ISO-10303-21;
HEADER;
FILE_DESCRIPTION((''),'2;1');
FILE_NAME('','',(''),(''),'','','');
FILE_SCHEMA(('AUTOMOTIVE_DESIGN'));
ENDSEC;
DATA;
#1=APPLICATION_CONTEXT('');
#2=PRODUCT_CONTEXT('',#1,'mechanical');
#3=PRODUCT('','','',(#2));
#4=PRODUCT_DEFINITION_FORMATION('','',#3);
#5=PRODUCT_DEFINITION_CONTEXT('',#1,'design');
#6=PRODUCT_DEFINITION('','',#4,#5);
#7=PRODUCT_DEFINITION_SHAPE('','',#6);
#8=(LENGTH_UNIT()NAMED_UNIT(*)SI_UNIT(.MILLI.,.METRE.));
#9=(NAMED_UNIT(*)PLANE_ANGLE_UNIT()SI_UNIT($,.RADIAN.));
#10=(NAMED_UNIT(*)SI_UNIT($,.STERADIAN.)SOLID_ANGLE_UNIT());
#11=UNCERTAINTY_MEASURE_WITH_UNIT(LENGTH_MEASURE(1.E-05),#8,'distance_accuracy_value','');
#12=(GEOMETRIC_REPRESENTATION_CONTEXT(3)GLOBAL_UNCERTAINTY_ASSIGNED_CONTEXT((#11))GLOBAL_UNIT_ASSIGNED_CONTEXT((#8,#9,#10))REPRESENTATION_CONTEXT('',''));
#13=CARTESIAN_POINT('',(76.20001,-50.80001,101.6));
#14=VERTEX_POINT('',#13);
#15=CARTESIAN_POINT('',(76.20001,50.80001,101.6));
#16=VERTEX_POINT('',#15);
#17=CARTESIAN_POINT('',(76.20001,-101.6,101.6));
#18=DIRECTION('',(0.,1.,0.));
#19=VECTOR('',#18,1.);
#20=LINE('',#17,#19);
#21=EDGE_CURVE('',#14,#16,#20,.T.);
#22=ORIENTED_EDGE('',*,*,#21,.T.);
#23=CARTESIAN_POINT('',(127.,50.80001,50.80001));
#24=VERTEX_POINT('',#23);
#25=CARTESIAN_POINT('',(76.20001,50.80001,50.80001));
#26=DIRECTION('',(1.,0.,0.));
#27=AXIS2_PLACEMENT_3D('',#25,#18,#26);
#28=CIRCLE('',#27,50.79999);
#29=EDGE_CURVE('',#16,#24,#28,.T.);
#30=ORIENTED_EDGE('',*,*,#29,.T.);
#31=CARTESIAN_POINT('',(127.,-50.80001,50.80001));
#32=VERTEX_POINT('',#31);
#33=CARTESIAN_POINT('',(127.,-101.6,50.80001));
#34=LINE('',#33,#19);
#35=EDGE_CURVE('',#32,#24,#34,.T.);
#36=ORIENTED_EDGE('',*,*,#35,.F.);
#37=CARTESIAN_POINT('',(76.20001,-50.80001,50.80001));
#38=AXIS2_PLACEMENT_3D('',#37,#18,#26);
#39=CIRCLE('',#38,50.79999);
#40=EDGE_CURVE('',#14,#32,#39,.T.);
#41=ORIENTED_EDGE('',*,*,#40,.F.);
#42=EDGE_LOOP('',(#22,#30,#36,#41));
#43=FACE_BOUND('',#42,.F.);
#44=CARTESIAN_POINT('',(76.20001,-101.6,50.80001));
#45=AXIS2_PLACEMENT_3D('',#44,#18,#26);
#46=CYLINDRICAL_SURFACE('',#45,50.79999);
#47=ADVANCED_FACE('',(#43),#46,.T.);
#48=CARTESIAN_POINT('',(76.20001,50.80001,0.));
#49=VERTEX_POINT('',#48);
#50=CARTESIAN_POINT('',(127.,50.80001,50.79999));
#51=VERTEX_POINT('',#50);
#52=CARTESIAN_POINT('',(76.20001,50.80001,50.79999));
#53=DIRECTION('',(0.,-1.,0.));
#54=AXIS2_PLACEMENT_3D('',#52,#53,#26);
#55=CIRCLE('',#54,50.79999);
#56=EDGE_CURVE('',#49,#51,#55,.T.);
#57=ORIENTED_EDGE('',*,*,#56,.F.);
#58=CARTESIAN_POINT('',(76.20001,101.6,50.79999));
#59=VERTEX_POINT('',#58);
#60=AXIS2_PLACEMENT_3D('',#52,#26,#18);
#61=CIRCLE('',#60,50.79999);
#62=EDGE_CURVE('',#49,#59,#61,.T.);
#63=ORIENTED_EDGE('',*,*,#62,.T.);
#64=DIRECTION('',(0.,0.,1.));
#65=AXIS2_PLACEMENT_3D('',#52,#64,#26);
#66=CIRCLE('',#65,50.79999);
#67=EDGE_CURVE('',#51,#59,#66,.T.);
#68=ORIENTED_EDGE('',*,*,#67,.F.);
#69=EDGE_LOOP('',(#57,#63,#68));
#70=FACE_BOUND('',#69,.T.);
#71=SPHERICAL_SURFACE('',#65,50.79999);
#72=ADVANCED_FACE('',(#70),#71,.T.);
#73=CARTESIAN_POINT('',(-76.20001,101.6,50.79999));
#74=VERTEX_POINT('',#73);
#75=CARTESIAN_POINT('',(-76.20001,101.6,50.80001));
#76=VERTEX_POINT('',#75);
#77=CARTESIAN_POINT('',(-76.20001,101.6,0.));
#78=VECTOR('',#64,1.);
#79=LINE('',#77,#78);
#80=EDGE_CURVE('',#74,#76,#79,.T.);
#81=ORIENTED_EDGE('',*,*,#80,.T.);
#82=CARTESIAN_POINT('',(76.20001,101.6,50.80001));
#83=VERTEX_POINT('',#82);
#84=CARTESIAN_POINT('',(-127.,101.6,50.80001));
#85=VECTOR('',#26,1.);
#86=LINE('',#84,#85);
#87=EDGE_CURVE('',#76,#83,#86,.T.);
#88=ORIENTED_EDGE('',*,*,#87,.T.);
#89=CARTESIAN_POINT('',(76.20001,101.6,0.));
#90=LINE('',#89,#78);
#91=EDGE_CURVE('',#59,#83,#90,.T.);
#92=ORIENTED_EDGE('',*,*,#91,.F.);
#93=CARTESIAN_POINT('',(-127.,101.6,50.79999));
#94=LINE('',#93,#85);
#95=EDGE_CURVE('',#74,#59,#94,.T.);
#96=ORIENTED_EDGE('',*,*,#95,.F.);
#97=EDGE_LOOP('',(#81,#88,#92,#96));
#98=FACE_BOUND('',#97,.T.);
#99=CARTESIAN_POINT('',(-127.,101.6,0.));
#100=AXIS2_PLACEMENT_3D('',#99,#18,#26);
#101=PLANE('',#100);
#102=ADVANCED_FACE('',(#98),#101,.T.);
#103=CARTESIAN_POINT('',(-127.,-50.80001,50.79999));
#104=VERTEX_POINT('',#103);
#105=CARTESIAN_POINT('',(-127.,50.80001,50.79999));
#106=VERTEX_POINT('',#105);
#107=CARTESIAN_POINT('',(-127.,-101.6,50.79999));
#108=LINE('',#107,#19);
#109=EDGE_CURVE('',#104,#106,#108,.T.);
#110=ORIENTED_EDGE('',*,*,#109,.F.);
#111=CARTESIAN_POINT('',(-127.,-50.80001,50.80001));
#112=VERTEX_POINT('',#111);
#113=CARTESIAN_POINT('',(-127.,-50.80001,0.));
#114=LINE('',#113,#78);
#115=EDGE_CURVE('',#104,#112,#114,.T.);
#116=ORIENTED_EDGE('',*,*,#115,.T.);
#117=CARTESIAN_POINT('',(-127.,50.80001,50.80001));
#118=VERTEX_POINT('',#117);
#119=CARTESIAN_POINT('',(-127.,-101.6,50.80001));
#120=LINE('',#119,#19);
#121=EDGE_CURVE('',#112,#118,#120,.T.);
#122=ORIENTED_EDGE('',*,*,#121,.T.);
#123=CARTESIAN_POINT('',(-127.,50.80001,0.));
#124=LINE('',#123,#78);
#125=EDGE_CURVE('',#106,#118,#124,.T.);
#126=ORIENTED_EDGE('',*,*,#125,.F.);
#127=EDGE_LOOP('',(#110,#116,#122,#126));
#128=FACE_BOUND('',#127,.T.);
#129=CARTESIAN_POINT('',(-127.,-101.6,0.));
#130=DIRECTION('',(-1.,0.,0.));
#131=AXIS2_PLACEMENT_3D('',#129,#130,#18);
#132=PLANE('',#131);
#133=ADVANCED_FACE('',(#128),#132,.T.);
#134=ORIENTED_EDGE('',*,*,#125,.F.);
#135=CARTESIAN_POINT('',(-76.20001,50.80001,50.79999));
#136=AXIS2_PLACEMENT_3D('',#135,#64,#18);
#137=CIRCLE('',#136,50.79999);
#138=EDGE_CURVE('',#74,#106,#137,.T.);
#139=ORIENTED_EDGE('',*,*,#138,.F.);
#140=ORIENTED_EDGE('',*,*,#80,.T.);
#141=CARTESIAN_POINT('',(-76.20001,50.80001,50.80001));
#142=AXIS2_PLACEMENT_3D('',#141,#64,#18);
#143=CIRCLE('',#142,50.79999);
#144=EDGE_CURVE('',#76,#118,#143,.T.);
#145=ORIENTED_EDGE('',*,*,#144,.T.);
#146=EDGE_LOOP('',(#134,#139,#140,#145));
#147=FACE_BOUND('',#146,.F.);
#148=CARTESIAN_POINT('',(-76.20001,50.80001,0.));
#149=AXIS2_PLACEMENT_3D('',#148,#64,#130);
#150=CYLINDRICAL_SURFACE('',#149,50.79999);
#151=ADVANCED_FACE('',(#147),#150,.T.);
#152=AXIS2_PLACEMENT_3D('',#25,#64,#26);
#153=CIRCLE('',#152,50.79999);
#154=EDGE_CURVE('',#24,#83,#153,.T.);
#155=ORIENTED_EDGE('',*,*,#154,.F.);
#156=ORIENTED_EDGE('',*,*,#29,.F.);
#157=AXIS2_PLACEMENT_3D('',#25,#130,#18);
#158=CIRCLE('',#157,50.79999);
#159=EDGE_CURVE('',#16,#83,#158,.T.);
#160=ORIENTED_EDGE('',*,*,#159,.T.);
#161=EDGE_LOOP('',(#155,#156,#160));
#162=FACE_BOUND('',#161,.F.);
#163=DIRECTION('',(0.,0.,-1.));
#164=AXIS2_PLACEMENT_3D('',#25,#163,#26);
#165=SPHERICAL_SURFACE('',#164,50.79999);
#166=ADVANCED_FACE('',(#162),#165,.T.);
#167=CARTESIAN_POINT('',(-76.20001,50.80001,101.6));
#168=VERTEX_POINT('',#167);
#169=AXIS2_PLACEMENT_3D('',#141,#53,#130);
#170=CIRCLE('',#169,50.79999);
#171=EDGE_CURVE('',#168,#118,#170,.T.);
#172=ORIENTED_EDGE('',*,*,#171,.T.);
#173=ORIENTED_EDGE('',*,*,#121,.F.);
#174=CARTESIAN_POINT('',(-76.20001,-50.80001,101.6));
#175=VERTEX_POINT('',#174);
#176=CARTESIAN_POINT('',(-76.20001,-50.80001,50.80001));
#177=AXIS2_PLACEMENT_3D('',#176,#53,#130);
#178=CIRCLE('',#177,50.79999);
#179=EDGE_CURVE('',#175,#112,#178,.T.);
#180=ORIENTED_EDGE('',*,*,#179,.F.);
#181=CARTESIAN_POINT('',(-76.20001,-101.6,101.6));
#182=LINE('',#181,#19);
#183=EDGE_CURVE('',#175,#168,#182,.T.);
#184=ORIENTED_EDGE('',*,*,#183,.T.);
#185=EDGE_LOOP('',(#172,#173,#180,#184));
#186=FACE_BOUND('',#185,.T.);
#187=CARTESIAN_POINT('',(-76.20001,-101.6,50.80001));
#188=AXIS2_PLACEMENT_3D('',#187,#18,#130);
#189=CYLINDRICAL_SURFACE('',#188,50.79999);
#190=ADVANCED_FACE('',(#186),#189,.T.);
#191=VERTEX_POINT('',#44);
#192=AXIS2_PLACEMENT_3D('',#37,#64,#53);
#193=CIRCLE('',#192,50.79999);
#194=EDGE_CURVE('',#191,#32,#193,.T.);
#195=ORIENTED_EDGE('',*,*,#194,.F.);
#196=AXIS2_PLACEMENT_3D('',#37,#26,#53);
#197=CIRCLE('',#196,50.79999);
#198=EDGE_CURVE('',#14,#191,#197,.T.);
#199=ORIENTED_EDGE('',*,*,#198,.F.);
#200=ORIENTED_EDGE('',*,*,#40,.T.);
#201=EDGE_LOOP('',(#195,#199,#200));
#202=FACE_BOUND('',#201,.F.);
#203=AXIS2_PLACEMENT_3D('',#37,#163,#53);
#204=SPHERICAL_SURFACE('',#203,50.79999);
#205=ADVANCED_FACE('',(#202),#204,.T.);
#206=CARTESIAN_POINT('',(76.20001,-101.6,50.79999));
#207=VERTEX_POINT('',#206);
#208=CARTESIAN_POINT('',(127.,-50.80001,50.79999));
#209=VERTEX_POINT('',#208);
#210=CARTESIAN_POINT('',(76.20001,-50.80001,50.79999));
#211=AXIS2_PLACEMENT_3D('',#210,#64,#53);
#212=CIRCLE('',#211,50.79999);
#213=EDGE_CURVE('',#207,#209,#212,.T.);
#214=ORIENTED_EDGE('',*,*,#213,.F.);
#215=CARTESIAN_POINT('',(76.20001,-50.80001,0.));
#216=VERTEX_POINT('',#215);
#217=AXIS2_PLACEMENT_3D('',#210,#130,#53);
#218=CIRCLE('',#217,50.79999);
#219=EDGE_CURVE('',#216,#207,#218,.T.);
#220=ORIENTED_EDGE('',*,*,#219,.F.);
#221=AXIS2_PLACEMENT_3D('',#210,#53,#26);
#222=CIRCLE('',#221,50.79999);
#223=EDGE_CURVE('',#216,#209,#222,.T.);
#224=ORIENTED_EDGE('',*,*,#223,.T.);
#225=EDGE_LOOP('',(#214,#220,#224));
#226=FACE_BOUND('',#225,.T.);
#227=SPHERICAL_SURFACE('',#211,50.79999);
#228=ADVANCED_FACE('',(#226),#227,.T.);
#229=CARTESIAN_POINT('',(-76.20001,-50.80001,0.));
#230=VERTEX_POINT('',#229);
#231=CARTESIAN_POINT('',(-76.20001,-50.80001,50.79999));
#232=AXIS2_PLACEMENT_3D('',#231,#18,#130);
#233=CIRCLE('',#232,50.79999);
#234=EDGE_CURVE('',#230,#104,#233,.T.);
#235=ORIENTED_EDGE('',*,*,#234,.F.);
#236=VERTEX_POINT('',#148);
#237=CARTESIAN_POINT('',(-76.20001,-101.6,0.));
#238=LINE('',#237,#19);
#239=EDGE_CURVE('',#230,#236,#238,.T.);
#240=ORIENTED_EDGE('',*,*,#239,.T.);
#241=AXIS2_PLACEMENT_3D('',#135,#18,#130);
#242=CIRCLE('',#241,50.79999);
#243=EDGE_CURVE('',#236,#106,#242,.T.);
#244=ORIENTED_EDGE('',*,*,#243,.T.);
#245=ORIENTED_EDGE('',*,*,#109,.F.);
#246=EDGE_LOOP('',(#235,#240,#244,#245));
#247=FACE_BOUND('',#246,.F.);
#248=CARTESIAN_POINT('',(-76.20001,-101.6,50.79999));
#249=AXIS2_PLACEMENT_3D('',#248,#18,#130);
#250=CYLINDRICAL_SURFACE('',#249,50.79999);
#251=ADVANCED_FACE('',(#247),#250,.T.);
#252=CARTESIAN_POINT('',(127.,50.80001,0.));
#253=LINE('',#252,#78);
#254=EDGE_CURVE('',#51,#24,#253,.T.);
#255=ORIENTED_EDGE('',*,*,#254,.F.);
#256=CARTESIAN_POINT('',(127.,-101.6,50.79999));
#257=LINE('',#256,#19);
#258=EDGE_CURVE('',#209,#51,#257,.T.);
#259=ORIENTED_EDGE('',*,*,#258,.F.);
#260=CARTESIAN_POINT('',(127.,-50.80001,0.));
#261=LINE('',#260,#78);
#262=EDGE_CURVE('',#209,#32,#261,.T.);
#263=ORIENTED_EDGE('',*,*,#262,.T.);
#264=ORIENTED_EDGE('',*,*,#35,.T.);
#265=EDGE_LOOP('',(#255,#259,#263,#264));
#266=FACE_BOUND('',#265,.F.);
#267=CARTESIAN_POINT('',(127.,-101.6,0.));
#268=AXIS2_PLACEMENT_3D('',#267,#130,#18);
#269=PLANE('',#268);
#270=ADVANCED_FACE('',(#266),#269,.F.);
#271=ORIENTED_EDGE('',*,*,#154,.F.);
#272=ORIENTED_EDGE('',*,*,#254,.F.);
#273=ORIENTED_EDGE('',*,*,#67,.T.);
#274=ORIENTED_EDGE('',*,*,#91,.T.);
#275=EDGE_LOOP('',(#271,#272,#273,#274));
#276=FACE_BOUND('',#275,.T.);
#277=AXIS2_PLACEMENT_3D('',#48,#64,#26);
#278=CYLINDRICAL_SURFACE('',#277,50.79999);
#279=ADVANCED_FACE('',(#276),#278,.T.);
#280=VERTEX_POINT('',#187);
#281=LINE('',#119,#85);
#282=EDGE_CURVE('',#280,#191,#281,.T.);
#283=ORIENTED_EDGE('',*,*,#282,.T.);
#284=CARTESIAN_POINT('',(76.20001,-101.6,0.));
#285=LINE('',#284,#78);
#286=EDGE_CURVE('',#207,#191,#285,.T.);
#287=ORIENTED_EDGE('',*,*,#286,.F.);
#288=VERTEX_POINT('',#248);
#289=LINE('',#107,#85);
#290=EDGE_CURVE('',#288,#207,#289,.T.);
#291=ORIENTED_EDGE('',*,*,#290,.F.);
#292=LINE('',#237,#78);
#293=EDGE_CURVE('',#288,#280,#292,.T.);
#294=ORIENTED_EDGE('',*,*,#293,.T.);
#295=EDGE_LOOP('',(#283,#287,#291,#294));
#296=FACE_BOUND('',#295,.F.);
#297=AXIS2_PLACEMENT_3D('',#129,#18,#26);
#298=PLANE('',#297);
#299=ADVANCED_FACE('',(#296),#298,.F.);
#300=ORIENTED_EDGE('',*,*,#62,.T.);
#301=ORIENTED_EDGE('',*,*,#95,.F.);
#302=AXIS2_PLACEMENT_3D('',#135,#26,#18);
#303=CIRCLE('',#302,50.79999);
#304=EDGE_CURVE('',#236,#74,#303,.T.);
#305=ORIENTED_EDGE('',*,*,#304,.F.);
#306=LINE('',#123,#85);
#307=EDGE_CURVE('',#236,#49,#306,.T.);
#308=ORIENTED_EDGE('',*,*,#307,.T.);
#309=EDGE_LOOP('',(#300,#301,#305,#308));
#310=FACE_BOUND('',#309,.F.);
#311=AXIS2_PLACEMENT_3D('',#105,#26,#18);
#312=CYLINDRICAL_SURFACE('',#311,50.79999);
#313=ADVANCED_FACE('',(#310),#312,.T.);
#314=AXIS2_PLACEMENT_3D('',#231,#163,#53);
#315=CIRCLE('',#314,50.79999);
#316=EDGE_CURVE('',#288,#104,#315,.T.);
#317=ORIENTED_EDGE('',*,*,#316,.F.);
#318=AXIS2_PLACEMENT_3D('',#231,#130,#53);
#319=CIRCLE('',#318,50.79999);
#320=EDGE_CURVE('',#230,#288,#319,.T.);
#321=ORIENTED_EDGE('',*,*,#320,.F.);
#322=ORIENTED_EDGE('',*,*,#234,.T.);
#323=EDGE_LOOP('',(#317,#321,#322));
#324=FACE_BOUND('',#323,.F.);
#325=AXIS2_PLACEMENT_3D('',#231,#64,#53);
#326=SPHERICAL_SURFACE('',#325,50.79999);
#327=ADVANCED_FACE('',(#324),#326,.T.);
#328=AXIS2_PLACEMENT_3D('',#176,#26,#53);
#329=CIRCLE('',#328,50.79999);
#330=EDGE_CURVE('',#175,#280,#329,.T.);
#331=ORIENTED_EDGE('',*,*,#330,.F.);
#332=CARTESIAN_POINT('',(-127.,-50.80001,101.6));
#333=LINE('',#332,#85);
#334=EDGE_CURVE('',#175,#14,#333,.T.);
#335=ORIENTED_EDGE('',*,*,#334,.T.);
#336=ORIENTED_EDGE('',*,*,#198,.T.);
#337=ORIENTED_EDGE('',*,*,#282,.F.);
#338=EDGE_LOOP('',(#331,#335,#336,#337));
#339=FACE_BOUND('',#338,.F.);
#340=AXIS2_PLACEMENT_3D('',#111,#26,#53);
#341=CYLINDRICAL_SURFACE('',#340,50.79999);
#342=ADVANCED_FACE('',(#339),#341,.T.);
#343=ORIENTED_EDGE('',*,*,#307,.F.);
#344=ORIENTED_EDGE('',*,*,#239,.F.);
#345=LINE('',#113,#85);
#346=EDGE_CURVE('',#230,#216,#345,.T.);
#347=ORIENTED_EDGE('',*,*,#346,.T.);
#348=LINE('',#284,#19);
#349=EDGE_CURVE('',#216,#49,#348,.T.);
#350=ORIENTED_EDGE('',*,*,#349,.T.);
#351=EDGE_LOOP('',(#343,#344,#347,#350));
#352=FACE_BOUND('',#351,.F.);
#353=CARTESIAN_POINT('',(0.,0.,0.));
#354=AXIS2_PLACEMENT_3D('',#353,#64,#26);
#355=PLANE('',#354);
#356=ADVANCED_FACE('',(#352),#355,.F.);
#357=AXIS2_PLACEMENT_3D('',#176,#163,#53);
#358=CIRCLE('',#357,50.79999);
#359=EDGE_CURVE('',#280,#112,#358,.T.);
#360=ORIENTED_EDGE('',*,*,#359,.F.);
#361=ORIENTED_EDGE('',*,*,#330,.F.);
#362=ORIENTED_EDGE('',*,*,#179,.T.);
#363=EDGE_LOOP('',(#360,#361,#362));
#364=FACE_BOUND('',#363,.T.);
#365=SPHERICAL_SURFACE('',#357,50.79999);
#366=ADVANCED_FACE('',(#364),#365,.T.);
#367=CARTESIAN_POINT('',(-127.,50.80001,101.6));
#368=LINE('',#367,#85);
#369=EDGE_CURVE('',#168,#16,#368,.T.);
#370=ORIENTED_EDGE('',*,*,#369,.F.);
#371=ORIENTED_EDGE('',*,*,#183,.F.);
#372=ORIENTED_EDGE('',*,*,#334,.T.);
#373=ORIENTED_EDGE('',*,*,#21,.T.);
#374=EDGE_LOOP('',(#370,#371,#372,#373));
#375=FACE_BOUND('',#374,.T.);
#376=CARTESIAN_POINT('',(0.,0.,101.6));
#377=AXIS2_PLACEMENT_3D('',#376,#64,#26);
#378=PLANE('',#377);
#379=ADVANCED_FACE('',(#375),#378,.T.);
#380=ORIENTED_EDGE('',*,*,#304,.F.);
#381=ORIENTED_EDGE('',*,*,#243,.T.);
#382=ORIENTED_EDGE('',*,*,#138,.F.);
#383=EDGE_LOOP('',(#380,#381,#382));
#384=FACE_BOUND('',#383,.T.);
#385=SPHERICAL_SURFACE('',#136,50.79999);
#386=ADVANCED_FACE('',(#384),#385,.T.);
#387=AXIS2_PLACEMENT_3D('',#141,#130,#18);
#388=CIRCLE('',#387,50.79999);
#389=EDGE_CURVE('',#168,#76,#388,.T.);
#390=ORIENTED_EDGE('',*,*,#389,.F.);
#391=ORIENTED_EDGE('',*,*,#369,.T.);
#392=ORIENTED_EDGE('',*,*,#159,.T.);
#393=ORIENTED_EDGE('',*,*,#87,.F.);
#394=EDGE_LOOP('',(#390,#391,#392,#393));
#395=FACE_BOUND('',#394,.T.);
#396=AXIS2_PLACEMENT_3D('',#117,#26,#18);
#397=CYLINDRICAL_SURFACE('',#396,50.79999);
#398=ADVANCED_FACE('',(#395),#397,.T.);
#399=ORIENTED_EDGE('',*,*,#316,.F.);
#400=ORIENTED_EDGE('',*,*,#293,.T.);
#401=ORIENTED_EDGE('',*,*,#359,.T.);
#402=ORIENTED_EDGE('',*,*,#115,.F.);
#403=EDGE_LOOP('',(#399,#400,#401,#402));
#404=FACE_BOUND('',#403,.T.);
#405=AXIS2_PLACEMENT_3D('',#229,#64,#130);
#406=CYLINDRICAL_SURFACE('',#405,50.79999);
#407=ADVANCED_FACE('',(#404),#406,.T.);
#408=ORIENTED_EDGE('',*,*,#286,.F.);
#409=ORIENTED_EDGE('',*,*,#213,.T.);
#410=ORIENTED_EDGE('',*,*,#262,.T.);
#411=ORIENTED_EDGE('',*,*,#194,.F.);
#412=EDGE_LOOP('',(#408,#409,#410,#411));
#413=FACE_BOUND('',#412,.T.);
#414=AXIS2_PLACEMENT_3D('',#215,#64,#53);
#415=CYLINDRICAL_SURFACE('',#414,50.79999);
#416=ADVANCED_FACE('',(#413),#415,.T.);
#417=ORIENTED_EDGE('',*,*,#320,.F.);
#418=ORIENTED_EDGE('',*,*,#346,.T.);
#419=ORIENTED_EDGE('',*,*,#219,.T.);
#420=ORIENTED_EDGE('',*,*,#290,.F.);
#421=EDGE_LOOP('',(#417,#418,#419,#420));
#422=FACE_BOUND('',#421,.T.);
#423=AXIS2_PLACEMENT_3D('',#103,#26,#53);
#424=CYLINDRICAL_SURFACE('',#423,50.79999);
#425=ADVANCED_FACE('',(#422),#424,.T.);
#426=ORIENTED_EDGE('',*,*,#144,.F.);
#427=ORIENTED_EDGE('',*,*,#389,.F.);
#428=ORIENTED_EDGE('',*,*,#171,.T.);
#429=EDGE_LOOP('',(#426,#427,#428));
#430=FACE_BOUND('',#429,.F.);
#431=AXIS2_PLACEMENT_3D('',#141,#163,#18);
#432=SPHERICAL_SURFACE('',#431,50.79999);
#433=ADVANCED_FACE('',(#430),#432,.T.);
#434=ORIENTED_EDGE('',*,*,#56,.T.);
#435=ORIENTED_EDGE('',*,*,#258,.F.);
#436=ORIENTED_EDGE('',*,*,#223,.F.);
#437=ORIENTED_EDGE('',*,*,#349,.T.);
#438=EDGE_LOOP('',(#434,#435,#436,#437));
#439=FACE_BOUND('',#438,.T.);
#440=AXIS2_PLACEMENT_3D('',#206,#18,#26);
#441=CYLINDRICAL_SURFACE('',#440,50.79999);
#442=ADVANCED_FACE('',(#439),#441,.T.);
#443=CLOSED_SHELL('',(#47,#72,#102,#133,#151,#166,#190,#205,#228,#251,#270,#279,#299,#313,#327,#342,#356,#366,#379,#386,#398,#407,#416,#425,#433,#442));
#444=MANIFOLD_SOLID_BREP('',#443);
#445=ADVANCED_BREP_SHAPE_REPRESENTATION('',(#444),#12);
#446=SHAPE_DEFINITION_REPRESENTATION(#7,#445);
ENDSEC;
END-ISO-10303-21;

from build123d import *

# Parameters (mm, degrees)
F0_W     = 254
F0_H     = 203.2
F1_DEPTH = 101.6
F2_R     = 50.79999


# Not quite as in the source:
# - a fillet or chamfer is up to 0.001 mm smaller than in the source, because OpenCascade refuses the exact size


with BuildPart() as f1:
    # F0 (on Top) → F1 (new body)
    with BuildSketch(Plane.XY):
        Rectangle(F0_W, F0_H)
    extrude(amount=F1_DEPTH)

    # F2 (radius 50.8 in the source; OpenCascade refuses exactly that, so slightly less here)
    f2_edges = [f1.edges().sort_by_distance(p)[0] for p in [
        (-127, -101.6, 50.8),
        (127, -101.6, 50.8),
        (0, -101.6, 0),
        (0, -101.6, 101.6),
        (127, 101.6, 50.8),
        (127, 0, 0),
        (127, 0, 101.6),
        (-127, 101.6, 50.8),
        (0, 101.6, 0),
        (0, 101.6, 101.6),
        (-127, 0, 0),
        (-127, 0, 101.6),
    ]]
    fillet(f2_edges, radius=F2_R)


solid = f1.part
